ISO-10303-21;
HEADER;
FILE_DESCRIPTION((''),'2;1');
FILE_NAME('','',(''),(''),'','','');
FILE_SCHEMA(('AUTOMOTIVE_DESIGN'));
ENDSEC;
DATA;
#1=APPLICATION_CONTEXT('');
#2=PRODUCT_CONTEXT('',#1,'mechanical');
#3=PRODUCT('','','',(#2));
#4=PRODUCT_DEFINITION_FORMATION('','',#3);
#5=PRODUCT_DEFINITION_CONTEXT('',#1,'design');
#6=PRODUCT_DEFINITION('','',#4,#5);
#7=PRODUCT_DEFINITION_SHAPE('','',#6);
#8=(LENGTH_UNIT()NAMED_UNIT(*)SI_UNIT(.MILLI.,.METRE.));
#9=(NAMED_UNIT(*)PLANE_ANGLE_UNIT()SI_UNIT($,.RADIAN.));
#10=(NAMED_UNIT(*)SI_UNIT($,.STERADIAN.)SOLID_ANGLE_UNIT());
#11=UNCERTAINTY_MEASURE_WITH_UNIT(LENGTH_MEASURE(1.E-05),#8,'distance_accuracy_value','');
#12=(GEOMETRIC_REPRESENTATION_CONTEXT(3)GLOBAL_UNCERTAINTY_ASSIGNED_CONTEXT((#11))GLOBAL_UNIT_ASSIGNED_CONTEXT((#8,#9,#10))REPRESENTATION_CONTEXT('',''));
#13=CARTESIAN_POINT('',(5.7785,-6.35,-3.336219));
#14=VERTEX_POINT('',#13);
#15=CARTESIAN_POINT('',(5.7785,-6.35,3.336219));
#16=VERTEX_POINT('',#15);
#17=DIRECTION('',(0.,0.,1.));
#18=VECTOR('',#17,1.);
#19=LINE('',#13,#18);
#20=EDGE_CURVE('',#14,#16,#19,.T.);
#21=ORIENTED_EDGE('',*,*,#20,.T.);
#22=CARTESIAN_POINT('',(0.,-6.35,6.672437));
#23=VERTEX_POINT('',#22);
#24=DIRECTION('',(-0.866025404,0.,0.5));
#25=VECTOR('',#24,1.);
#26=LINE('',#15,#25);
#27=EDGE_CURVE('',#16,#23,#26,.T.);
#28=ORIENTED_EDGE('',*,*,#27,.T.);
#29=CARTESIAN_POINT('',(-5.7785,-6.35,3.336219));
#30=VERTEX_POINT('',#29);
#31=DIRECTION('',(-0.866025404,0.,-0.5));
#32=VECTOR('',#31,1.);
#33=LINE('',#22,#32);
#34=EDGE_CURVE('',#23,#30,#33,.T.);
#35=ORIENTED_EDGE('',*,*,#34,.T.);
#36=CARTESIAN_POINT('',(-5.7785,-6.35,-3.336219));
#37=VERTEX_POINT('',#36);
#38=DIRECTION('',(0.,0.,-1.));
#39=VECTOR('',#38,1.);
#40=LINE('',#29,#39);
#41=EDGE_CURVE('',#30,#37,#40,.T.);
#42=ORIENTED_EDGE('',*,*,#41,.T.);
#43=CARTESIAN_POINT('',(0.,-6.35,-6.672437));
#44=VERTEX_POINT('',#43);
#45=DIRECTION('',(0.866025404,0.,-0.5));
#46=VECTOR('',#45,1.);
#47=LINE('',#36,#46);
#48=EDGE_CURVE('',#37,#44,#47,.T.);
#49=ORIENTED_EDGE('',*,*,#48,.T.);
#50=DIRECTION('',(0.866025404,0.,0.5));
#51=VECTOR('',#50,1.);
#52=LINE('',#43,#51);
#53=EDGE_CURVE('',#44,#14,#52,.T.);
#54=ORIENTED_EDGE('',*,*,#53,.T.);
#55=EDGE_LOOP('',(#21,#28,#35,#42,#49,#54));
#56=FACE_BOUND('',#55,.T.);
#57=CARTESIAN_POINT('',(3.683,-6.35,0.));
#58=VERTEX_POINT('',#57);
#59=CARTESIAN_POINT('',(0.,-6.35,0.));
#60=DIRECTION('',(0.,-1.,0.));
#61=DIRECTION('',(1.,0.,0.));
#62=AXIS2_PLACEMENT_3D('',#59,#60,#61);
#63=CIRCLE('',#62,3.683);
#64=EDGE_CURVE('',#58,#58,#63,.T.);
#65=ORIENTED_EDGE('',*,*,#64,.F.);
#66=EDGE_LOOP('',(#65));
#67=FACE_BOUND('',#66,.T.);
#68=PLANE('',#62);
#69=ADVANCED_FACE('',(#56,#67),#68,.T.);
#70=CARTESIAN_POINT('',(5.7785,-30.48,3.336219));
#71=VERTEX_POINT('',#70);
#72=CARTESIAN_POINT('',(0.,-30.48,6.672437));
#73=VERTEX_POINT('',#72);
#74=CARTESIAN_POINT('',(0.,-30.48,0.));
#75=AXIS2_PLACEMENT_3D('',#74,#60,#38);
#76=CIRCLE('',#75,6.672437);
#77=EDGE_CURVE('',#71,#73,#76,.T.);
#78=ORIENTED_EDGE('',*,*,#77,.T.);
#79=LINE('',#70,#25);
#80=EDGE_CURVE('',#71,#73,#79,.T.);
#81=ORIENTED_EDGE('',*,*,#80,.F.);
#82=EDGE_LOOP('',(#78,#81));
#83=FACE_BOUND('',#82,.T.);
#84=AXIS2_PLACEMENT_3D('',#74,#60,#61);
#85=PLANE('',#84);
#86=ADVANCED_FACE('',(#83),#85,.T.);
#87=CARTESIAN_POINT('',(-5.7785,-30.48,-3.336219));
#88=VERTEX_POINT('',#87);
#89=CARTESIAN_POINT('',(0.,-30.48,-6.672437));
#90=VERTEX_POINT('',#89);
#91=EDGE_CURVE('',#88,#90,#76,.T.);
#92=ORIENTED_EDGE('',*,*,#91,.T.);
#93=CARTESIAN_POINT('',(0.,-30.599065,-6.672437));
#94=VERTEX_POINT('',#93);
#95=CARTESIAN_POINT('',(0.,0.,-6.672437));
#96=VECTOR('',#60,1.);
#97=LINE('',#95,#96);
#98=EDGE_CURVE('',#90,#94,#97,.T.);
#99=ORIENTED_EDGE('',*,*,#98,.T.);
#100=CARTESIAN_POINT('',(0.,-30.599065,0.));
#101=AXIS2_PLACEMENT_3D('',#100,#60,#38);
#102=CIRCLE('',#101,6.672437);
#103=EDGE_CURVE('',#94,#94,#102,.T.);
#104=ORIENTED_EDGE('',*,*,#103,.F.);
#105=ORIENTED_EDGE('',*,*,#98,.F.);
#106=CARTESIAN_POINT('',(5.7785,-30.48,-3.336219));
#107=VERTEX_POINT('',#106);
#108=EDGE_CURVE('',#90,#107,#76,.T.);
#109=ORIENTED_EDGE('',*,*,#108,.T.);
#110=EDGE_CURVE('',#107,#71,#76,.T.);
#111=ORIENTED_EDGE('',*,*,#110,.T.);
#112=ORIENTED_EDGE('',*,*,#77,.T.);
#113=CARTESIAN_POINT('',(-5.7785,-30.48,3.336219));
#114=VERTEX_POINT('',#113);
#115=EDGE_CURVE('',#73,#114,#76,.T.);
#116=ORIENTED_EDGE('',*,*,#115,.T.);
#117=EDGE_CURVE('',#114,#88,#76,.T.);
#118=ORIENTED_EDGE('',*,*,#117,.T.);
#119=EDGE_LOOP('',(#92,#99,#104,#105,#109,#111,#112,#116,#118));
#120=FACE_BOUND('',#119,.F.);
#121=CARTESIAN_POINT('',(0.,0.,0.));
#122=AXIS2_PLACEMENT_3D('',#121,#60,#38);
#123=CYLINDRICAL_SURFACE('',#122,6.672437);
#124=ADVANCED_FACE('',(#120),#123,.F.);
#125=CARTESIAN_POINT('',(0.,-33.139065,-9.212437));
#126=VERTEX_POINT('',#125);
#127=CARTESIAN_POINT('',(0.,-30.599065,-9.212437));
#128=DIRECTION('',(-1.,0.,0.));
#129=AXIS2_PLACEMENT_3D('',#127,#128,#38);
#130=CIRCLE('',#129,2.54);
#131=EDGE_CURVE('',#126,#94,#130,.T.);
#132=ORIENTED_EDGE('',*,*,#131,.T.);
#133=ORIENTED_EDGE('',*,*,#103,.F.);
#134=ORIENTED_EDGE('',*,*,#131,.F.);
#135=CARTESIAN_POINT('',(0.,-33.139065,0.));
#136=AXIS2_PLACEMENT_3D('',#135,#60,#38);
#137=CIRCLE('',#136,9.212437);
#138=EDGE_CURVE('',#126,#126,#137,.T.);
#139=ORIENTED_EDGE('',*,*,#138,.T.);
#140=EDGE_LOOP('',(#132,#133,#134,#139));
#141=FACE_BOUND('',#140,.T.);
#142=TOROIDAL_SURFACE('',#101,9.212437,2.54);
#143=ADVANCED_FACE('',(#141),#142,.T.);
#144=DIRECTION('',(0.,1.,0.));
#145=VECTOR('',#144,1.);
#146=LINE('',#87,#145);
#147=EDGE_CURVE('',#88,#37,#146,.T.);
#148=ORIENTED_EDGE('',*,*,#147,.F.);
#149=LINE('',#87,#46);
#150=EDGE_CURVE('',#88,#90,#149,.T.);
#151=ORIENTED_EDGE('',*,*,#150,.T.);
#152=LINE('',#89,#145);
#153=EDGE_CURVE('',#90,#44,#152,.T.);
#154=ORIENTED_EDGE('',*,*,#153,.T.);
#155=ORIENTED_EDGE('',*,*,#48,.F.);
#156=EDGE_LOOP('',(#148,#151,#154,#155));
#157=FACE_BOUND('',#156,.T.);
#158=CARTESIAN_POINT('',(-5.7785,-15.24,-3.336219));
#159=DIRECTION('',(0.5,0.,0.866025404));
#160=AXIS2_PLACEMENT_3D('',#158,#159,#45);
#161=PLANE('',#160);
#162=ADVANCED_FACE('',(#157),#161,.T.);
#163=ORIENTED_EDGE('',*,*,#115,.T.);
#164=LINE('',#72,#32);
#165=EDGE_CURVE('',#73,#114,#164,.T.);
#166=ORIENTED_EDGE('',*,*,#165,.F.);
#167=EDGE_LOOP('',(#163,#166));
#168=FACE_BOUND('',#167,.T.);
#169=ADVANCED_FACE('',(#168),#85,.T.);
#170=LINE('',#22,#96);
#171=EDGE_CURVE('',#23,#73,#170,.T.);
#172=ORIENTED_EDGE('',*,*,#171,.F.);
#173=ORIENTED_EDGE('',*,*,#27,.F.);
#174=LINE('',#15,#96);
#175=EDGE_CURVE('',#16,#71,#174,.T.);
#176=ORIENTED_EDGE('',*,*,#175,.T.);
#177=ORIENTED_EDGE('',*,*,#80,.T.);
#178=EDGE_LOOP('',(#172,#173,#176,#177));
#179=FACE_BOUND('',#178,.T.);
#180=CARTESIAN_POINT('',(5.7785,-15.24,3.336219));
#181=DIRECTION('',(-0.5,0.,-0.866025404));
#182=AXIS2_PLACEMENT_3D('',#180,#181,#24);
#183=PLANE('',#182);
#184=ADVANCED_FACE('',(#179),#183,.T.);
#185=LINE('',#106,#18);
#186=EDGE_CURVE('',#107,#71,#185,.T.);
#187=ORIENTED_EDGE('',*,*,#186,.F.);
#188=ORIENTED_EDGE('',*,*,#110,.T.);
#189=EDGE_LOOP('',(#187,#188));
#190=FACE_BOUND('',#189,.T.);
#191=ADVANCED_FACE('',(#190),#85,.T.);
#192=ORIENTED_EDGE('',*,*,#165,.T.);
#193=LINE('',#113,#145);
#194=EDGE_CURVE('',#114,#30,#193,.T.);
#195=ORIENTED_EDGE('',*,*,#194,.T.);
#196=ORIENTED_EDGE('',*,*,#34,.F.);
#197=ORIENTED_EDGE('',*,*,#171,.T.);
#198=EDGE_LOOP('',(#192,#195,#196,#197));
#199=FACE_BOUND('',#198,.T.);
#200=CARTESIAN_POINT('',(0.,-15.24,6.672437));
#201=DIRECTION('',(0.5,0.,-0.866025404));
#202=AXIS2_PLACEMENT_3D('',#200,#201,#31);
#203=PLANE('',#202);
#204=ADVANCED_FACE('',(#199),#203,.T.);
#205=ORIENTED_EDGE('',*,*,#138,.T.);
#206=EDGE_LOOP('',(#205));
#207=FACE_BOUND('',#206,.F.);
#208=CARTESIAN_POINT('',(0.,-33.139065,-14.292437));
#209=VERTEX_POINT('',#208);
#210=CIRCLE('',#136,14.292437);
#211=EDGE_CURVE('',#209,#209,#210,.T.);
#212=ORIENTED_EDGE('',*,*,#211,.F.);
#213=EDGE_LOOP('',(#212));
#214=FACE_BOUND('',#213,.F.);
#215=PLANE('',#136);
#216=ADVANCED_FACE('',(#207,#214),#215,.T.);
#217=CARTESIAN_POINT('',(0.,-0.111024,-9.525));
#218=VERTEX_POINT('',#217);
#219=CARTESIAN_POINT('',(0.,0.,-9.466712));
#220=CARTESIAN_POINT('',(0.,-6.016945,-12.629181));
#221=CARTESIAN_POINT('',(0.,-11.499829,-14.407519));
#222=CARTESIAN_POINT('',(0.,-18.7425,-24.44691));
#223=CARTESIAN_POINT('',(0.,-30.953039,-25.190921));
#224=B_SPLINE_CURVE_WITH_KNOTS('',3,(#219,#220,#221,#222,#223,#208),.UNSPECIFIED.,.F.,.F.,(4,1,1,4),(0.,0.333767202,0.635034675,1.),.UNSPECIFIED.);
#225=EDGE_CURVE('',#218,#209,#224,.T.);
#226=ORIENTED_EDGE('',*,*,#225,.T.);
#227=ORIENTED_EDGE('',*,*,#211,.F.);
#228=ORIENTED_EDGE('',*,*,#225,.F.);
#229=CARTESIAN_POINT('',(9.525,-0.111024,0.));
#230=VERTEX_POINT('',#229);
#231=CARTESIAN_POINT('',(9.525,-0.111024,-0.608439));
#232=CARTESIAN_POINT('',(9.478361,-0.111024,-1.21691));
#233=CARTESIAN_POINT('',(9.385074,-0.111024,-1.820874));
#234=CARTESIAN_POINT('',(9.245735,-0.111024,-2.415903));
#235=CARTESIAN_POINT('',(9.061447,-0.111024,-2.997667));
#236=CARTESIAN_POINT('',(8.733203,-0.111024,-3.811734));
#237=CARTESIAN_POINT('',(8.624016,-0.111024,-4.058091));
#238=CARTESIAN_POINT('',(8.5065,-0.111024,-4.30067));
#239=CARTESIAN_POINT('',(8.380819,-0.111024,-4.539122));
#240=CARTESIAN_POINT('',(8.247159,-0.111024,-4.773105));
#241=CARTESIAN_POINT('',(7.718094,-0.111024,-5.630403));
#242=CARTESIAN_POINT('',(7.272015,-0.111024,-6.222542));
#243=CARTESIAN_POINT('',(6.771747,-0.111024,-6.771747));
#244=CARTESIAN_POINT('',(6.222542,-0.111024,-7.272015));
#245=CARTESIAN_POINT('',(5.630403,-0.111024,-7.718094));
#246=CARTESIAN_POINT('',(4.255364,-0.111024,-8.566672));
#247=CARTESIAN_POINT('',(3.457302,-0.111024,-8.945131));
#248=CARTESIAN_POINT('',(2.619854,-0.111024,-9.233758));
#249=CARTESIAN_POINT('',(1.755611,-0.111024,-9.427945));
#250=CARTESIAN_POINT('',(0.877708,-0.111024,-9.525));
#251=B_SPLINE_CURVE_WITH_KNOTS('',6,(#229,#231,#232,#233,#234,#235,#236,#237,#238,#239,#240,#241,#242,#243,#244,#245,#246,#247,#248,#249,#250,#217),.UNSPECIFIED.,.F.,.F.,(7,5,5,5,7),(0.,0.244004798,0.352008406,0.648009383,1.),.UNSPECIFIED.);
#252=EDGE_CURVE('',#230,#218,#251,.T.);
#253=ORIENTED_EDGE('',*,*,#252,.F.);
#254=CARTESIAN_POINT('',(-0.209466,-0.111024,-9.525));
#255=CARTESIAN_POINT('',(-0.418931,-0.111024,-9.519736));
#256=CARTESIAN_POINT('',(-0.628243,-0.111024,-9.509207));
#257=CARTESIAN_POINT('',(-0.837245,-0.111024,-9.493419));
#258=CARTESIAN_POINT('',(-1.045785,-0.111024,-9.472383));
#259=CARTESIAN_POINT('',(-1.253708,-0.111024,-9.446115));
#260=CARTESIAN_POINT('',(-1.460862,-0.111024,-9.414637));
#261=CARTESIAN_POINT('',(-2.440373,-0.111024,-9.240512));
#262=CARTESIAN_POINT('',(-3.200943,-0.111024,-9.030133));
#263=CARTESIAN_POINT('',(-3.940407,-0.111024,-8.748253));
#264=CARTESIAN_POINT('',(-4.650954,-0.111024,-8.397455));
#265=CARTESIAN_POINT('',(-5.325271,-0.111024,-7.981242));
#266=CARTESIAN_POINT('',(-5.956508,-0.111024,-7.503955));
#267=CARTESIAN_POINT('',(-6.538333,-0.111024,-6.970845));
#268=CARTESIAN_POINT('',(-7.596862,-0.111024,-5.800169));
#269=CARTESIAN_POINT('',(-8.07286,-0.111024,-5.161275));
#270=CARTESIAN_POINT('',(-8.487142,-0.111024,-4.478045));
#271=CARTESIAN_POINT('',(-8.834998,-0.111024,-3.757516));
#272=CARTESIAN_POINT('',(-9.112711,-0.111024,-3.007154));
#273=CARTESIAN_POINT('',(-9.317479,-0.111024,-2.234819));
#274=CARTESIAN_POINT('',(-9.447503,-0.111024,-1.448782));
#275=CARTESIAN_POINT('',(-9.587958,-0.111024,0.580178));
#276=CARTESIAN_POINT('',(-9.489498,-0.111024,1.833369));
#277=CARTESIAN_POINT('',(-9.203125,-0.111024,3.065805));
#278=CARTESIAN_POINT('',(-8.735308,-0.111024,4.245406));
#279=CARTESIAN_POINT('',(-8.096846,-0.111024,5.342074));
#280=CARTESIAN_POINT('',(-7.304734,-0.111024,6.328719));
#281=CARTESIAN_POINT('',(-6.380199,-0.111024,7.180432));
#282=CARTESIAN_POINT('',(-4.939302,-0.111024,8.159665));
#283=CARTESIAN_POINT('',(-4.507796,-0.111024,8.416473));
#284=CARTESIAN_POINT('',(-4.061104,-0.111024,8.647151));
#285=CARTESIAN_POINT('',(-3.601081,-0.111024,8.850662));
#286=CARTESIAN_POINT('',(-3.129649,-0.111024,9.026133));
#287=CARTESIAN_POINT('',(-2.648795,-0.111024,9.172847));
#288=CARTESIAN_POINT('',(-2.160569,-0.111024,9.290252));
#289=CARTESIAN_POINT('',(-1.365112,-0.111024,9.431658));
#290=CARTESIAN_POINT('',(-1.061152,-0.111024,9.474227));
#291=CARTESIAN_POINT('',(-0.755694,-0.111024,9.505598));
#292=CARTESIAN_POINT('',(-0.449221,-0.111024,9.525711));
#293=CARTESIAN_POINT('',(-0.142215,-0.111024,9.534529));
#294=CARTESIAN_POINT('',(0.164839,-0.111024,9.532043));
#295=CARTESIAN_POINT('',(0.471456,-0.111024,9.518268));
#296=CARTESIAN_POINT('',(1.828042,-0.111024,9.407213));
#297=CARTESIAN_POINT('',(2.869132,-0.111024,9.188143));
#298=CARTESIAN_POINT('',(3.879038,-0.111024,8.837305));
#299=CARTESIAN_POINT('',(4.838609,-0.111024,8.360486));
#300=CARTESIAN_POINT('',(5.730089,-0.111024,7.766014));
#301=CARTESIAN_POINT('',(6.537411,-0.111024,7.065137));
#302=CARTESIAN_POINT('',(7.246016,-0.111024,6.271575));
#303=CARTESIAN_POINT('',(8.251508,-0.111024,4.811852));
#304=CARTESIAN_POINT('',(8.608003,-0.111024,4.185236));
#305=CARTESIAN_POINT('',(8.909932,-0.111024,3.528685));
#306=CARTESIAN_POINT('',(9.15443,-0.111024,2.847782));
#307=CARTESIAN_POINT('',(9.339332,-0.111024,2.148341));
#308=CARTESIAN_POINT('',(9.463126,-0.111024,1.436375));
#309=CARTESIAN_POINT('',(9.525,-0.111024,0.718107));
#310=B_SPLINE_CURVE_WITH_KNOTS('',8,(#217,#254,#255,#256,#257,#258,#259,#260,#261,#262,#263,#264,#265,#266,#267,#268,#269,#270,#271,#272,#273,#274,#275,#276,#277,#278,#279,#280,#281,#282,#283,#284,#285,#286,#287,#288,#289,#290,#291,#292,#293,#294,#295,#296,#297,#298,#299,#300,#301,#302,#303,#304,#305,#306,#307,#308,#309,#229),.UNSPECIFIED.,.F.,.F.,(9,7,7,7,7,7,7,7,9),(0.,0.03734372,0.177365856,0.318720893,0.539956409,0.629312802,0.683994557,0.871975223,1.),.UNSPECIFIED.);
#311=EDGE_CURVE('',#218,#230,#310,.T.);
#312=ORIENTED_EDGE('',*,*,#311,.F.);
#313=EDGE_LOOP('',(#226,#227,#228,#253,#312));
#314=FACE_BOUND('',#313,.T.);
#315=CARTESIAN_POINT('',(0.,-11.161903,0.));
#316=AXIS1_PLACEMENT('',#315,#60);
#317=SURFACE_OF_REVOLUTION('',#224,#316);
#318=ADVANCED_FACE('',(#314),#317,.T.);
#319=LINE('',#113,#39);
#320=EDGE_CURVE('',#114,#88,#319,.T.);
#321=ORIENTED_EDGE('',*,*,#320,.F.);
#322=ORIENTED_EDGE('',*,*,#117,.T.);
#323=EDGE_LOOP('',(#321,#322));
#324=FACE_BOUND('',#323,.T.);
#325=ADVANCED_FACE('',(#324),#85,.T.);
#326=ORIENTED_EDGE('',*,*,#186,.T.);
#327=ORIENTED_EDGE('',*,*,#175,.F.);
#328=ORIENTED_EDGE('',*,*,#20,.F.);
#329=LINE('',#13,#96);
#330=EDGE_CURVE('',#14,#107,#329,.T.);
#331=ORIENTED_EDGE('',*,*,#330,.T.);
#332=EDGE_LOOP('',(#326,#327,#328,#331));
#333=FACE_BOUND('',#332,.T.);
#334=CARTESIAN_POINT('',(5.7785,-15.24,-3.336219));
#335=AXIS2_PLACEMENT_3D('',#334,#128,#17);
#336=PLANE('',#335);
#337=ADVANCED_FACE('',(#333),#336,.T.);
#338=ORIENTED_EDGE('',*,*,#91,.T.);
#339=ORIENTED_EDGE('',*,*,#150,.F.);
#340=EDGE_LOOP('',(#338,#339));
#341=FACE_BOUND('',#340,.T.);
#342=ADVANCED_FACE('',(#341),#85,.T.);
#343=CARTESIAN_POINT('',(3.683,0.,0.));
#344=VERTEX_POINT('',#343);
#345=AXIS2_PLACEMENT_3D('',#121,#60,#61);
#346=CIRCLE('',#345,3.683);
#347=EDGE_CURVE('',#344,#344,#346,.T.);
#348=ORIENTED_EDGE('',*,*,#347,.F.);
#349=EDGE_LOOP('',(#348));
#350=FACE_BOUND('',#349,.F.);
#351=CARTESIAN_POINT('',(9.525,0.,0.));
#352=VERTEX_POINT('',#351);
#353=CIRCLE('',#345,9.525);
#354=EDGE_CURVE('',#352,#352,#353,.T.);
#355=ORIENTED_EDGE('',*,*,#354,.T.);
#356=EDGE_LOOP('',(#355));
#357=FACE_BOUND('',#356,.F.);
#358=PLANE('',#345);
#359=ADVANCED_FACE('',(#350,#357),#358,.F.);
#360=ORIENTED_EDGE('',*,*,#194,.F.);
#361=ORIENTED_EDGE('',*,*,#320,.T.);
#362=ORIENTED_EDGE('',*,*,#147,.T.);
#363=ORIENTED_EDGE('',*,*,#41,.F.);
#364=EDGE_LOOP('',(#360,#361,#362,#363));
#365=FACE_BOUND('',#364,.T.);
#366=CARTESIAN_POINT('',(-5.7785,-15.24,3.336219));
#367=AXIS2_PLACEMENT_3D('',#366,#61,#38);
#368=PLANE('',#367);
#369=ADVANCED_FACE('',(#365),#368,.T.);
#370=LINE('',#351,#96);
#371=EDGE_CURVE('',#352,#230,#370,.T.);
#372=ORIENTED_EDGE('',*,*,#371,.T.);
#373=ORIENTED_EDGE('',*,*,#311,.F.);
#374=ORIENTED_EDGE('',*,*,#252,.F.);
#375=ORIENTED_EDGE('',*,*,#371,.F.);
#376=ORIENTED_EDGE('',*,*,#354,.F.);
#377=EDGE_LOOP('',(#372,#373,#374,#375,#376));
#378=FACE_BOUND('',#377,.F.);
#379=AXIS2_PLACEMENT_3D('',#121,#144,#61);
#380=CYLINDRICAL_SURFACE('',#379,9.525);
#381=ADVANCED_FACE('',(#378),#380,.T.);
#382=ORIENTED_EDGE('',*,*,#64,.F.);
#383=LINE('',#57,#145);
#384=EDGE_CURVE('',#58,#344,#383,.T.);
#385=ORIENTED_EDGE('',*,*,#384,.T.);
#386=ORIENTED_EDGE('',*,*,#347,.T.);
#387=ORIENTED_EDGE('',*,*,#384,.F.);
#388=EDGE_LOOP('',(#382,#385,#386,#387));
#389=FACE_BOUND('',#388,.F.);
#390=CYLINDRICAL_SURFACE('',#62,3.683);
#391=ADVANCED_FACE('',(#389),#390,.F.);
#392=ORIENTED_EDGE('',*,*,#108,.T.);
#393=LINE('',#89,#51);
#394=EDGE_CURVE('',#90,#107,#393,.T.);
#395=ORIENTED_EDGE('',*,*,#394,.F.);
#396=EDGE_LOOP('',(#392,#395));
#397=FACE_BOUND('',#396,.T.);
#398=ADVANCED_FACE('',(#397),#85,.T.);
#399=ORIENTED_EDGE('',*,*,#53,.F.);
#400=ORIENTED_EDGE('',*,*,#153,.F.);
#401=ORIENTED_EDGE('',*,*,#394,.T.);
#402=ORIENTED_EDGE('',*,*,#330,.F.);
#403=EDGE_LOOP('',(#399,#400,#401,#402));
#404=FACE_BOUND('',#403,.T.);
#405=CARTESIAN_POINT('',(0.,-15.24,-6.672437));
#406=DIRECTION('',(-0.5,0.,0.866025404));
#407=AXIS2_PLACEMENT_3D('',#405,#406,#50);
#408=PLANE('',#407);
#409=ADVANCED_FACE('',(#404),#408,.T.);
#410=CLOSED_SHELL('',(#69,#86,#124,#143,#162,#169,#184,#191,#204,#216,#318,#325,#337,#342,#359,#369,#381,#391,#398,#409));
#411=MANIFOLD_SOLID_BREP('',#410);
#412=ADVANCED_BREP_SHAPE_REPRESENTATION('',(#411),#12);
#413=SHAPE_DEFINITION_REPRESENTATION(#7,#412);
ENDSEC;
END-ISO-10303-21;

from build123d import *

# Parameters (mm, degrees)
F0_R     = 9.525
F1_DEPTH = 15.24
F3_DEPTH = 8.89
F4_R     = 3.683
F5_DEPTH = 6.351
F8_R     = 2.54
F9_DEPTH = 15.24


# Not quite as in the source:
# - a feature names something its author has since deleted; it is built from what else it names


with BuildPart() as f1:
    # F0 (on Front) → F1 (new body)
    with BuildSketch(Plane.XZ):
        Circle(F0_R)
    extrude(amount=F1_DEPTH)

    # F2 (on face) → F3 (cut)
    with BuildSketch(Plane.XZ.offset(15.24)):
        Polygon((5.7785, -3.3362185305), (5.7785, 3.3362185305), (0, 6.672437061), (-5.7785, 3.3362185305), (-5.7785, -3.3362185305), (0, -6.672437061), align=None)
    extrude(amount=-F3_DEPTH, mode=Mode.SUBTRACT)

    # F4 (on face) → F5 (cut, through all)
    with BuildSketch(Plane.XZ.offset(6.35)):
        Circle(F4_R)
    extrude(amount=-F5_DEPTH, mode=Mode.SUBTRACT)

    # F6 (on Right) → F7 (revolve)
    with BuildSketch(Plane.YZ):
        with BuildLine():
            Line((-33.139064908, -6.672437061), (-33.139064908, -14.292437061))
            add(Edge.make_bspline(
                [(0, -9.4667123631), (-6.0169453004, -12.6291806394), (-11.4998287108, -14.4075187704), (-18.7425000775, -24.446910043), (-30.9530390066, -25.1909209173), (-33.139064908, -14.292437061)],
                knots=[0, 0, 0, 0, 0.3337672016, 0.635034675, 1, 1, 1, 1], degree=3))
            Line((0, -9.4667123631), (0, -6.672437061))
            Line((0, -6.672437061), (-33.139064908, -6.672437061))
        make_face()
    revolve(axis=Axis((0, -11.1619029194, 0), (0, -1, 0)))

    # F8
    f8_edges = [f1.edges().sort_by_distance(p)[0] for p in [
        (0, -33.139065, 6.672437),
    ]]
    fillet(f8_edges, radius=F8_R)

    # F9 (add): faces of the model
    f9_faces = [f1.faces().sort_by_distance(p)[0] for p in [
        (-3.069105432, -15.24, 5.315846542),
        (-6.138210864, -15.24, 0),
        (-3.069105432, -15.24, -5.315846542),
        (6.138210864, -15.24, 0),
        (3.069105432, -15.24, -5.315846542),
        (3.069105432, -15.24, 5.315846542),
    ]]
    extrude(f9_faces, amount=F9_DEPTH)


solid = f1.part
